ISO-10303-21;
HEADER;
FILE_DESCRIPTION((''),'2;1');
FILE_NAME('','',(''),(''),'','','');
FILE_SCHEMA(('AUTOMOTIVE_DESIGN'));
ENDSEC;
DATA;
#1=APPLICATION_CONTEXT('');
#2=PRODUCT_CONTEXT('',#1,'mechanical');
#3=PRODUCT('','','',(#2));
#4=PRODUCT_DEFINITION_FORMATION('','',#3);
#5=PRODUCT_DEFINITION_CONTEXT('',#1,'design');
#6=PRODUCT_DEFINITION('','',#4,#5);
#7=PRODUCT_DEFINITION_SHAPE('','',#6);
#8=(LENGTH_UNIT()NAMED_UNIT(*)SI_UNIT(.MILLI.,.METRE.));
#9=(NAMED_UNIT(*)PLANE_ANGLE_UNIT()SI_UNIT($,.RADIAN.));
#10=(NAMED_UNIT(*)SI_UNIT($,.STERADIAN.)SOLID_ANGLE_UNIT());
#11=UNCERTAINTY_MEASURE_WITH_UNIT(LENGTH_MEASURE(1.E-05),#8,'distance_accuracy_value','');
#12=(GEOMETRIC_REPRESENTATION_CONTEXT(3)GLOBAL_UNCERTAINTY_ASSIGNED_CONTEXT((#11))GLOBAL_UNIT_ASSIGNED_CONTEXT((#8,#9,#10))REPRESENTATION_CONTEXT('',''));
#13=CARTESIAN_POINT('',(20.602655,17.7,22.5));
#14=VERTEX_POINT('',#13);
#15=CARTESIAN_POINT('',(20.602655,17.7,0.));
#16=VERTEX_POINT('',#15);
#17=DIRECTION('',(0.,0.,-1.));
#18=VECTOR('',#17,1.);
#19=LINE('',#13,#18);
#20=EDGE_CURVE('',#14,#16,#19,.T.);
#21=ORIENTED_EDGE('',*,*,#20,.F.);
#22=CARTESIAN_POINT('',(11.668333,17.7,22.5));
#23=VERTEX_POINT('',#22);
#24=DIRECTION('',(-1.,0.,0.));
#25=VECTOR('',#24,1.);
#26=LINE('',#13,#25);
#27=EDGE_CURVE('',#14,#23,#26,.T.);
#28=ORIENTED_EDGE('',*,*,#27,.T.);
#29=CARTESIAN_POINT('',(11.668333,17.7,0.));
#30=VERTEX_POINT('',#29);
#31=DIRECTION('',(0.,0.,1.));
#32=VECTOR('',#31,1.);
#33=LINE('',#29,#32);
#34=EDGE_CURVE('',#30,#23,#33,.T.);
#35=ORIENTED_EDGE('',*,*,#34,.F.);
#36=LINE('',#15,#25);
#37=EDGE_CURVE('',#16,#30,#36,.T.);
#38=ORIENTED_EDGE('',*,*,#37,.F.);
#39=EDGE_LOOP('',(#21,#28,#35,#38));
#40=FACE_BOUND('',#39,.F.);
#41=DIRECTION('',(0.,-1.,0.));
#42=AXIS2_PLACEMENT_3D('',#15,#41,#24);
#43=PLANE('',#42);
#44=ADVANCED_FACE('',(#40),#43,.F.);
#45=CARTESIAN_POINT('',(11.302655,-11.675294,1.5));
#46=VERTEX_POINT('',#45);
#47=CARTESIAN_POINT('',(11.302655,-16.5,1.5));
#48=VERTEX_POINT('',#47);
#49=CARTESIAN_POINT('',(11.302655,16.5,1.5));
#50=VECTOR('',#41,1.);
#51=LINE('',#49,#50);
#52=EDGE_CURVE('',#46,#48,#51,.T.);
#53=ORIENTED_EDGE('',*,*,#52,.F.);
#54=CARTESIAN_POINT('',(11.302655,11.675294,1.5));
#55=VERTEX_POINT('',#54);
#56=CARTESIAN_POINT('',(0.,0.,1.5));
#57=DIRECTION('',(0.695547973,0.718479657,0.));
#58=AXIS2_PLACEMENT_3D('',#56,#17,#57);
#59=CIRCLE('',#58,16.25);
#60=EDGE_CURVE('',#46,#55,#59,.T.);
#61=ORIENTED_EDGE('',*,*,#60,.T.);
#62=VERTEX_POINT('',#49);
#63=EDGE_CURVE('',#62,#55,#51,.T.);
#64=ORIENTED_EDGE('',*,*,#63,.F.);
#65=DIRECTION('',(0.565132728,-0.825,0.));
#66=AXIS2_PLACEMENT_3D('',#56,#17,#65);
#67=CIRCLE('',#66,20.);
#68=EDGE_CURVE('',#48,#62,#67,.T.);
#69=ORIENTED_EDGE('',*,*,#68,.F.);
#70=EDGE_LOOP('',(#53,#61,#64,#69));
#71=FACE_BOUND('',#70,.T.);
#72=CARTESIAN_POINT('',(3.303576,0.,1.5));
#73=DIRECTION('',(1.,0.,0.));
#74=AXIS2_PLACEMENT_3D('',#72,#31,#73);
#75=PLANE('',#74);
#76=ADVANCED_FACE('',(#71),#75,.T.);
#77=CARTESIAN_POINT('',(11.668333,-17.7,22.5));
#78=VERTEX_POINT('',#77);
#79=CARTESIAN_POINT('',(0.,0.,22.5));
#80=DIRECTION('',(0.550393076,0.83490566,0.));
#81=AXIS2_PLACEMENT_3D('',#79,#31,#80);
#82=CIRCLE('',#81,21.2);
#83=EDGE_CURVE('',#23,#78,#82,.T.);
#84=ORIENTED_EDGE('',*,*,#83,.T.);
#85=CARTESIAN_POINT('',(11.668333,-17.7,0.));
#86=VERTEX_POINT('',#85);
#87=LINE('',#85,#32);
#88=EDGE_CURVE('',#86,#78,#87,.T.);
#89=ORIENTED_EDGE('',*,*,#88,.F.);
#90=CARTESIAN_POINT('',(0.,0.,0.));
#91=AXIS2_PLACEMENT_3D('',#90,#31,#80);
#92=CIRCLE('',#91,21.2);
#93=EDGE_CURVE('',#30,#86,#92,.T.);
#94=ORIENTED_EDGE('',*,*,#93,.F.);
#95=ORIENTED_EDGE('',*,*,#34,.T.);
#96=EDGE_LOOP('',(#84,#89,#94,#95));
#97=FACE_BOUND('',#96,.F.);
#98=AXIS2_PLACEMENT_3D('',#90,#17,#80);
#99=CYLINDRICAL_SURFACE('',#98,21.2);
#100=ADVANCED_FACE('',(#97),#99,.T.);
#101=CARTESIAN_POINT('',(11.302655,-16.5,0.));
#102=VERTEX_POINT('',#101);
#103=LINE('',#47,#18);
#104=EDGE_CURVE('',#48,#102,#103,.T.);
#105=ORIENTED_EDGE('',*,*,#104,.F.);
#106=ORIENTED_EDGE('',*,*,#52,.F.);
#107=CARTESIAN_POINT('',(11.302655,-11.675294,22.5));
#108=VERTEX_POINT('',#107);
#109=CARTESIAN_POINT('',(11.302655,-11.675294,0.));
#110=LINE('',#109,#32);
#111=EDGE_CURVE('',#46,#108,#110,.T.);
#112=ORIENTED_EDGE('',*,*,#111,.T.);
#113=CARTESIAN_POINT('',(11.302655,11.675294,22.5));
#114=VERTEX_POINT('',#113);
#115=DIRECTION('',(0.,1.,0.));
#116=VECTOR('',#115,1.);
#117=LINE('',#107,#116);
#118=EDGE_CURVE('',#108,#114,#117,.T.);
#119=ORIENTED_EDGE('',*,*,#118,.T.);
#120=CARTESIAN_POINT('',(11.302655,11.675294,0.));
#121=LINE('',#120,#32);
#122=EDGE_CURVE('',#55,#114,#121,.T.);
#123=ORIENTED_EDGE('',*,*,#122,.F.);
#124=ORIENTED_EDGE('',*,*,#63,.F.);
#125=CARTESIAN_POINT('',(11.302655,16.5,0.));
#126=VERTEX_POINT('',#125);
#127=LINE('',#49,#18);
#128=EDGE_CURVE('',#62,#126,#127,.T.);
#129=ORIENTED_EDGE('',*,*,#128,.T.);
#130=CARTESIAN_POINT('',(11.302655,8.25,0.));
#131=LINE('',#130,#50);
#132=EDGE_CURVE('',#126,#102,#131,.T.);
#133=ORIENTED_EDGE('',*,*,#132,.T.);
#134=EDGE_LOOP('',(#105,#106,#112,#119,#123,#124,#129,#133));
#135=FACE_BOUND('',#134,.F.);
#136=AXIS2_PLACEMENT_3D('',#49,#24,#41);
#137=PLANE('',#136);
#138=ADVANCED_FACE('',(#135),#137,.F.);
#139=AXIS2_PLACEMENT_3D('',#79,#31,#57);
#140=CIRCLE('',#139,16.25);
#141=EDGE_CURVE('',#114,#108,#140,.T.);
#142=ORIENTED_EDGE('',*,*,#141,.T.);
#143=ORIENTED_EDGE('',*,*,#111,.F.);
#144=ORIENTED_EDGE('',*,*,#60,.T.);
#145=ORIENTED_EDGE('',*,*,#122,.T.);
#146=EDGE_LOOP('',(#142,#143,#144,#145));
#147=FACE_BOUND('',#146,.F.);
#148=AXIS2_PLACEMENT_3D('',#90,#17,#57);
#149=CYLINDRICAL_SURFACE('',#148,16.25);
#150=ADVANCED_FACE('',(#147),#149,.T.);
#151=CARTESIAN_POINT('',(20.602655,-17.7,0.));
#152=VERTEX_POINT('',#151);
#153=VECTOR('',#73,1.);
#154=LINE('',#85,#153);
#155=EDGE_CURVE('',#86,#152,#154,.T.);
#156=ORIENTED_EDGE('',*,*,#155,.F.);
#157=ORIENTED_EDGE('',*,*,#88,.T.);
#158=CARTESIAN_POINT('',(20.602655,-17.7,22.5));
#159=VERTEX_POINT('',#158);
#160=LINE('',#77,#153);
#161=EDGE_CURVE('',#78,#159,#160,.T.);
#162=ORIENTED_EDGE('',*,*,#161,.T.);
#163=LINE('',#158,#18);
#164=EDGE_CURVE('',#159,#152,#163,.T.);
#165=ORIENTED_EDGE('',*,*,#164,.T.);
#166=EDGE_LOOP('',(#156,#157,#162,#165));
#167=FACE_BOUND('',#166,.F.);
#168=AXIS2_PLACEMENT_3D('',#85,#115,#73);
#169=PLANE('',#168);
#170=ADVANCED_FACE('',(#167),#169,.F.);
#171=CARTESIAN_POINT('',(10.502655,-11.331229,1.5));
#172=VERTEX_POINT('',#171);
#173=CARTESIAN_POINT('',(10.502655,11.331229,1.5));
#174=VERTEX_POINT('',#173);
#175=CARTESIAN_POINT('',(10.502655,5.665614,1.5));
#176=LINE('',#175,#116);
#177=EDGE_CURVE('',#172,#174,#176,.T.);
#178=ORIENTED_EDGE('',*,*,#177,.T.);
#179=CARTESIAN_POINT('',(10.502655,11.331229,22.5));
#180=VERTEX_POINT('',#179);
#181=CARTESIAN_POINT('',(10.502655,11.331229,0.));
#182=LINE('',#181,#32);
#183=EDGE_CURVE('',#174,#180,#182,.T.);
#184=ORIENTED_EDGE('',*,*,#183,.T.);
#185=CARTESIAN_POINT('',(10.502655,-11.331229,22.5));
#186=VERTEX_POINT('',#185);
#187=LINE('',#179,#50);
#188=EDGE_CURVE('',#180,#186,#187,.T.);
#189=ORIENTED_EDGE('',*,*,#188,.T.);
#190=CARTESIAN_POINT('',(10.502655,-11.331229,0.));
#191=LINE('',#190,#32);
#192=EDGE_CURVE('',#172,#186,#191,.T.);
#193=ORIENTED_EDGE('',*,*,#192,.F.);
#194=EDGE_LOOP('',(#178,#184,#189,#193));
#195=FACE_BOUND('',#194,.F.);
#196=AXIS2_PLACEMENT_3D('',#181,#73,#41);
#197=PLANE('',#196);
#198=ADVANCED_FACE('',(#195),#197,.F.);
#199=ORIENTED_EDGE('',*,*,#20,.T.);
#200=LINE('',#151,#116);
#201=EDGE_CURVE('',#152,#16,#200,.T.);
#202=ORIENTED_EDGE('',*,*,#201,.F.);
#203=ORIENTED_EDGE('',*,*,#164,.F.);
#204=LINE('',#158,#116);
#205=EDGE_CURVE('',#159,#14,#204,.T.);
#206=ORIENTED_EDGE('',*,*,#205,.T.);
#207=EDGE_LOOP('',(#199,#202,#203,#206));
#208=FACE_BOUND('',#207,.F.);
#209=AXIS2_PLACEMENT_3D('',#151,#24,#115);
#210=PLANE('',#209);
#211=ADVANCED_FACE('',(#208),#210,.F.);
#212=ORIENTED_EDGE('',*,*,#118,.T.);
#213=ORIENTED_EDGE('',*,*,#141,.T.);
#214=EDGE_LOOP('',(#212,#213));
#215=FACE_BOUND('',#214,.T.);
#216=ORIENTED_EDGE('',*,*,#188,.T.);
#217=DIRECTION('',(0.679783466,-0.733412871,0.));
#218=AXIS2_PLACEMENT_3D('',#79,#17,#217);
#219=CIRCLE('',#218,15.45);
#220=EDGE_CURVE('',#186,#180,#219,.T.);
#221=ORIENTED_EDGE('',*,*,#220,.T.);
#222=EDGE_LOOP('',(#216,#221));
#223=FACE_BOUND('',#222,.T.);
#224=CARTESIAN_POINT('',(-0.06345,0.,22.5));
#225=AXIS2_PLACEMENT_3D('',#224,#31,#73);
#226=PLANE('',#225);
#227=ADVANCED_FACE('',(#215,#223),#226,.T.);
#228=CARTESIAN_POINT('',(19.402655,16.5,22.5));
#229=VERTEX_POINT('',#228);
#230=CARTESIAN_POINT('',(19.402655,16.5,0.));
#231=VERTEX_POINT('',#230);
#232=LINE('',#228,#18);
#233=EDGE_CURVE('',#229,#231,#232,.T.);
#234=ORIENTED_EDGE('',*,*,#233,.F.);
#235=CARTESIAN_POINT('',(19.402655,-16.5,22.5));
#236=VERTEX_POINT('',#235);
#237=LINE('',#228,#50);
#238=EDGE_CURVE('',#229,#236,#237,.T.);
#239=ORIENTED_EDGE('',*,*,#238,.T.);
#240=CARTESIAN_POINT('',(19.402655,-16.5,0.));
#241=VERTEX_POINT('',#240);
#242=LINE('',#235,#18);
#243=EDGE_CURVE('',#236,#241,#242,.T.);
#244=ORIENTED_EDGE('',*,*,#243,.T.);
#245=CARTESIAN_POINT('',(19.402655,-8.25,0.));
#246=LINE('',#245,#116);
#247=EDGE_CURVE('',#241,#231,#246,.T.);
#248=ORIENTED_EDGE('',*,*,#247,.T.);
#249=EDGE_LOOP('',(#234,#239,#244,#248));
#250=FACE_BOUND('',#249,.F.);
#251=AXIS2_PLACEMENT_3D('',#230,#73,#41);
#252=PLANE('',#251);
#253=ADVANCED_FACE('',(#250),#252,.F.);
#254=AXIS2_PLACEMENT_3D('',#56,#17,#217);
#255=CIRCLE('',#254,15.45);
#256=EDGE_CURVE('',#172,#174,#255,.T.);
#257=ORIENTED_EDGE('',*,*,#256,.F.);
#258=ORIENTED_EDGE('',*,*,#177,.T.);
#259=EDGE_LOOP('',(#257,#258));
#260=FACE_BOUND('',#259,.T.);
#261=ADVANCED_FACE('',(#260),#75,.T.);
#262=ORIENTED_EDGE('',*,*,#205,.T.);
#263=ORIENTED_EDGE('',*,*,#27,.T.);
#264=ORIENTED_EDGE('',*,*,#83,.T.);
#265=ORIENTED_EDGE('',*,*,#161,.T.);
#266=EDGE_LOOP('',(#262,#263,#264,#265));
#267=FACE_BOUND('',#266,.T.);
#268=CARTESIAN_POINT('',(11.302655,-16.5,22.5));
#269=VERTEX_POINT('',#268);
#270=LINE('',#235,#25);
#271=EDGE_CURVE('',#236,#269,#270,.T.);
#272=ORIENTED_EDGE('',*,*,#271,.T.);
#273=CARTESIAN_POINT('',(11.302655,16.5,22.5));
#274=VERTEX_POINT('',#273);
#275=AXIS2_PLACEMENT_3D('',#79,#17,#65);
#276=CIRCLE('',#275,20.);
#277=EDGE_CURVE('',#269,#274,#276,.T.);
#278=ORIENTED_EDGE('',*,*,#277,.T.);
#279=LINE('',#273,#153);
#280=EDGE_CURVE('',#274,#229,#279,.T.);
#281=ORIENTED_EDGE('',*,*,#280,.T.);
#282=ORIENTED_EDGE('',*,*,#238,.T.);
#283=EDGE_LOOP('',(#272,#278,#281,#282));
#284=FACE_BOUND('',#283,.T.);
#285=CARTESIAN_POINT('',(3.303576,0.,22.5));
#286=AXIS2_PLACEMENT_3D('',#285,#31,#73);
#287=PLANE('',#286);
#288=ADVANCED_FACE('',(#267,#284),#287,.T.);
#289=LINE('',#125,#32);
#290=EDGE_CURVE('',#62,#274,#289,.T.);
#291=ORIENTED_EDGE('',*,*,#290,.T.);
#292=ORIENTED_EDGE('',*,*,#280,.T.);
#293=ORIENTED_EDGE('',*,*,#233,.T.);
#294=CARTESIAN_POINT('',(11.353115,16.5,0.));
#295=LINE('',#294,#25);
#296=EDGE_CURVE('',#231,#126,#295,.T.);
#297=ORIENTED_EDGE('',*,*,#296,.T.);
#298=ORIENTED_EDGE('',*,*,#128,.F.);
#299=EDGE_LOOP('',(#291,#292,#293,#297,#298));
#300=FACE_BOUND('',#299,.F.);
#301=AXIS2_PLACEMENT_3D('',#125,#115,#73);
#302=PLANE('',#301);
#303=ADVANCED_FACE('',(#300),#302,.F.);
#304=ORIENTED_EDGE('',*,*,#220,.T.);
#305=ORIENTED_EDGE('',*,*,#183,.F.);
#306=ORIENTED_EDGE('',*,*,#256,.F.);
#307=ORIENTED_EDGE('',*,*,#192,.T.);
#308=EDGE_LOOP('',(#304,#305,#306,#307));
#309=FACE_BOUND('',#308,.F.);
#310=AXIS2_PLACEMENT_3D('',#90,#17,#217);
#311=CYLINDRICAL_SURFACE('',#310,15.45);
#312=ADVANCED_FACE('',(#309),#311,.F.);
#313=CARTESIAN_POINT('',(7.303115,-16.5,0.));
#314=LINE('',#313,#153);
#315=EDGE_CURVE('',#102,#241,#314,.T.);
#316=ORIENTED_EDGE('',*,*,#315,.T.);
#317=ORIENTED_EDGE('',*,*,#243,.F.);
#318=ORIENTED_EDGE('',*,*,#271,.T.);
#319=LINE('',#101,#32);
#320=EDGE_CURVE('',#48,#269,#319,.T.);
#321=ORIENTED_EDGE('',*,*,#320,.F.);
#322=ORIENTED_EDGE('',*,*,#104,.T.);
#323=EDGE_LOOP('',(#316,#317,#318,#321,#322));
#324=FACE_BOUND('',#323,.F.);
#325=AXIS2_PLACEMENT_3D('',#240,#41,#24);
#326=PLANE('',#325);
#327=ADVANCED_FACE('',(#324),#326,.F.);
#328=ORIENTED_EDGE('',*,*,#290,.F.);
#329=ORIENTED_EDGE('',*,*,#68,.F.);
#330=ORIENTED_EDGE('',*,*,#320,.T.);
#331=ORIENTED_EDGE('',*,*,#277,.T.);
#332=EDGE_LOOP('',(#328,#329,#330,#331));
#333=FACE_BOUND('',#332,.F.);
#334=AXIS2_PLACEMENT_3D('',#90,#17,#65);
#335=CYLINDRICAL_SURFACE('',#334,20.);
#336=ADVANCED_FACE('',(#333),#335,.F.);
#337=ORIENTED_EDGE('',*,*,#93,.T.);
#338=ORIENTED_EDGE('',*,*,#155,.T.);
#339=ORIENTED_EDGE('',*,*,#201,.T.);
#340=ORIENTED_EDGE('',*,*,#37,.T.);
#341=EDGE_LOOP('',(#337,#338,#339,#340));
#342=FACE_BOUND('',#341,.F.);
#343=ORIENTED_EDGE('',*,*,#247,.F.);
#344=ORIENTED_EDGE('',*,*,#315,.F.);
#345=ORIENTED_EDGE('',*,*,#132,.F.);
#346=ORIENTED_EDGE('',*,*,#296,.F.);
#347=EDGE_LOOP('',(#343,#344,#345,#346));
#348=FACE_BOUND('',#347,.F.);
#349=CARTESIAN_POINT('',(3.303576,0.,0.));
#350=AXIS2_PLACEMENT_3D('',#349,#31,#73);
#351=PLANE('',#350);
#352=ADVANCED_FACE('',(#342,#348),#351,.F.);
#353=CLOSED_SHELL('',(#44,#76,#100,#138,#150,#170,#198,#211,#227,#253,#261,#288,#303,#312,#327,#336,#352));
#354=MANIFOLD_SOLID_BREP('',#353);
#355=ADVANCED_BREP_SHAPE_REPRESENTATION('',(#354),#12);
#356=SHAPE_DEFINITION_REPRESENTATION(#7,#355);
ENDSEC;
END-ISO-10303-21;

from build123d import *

# Parameters (mm, degrees)
F1_DEPTH = 1.5
F2_DEPTH = 22.5
F4_DEPTH = 25


# Not quite as in the source:
# - a feature names something its author has since deleted; it is built from what else it names


with BuildPart() as f1:
    # F0 (on Top) → F1 (new body)
    with BuildSketch(Plane.XY):
        with BuildLine():
            Line((20.6026545555, 17.7), (11.6683332143, 17.7))
            ThreePointArc((11.6683332143, 17.7), (-21.2, 0), (11.6683332143, -17.7))
            Line((11.6683332143, -17.7), (20.6026545555, -17.7))
            Line((20.6026545555, -17.7), (20.6026545555, 17.7))
        make_face()
        with BuildLine():
            ThreePointArc((11.3026545555, -16.5), (-20, 0), (11.3026545555, 16.5))
            Line((11.3026545555, 16.5), (19.4026545555, 16.5))
            Line((19.4026545555, 16.5), (19.4026545555, -16.5))
            Line((19.4026545555, -16.5), (11.3026545555, -16.5))
        make_face(mode=Mode.SUBTRACT)
        with BuildLine():
            Line((19.4026545555, 16.5), (11.3026545555, 16.5))
            ThreePointArc((11.3026545555, 16.5), (-20, 0), (11.3026545555, -16.5))
            Line((11.3026545555, -16.5), (19.4026545555, -16.5))
            Line((19.4026545555, -16.5), (19.4026545555, 16.5))
        make_face()
        with BuildLine():
            ThreePointArc((11.3026545555, -11.6752944288), (-16.25, 0), (11.3026545555, 11.6752944288))
            Line((11.3026545555, 11.6752944288), (11.3026545555, -11.6752944288))
        make_face(mode=Mode.SUBTRACT)
        with BuildLine():
            Line((11.3026545555, -11.6752944288), (11.3026545555, 11.6752944288))
            ThreePointArc((11.3026545555, 11.6752944288), (-16.25, 0), (11.3026545555, -11.6752944288))
        make_face()
        with BuildLine():
            ThreePointArc((10.5026545555, -11.3312288517), (-15.45, 0), (10.5026545555, 11.3312288517))
            Line((10.5026545555, 11.3312288517), (10.5026545555, -11.3312288517))
        make_face(mode=Mode.SUBTRACT)
        with BuildLine():
            Line((10.5026545555, -11.3312288517), (10.5026545555, 11.3312288517))
            ThreePointArc((10.5026545555, 11.3312288517), (-15.45, 0), (10.5026545555, -11.3312288517))
        make_face()
    extrude(amount=F1_DEPTH)

    # F0 (on Top) → F2 (join)
    with BuildSketch(Plane.XY):
        with BuildLine():
            Line((20.6026545555, 17.7), (11.6683332143, 17.7))
            ThreePointArc((11.6683332143, 17.7), (-21.2, 0), (11.6683332143, -17.7))
            Line((11.6683332143, -17.7), (20.6026545555, -17.7))
            Line((20.6026545555, -17.7), (20.6026545555, 17.7))
        make_face()
        with BuildLine():
            ThreePointArc((11.3026545555, -16.5), (-20, 0), (11.3026545555, 16.5))
            Line((11.3026545555, 16.5), (19.4026545555, 16.5))
            Line((19.4026545555, 16.5), (19.4026545555, -16.5))
            Line((19.4026545555, -16.5), (11.3026545555, -16.5))
        make_face(mode=Mode.SUBTRACT)
        with BuildLine():
            Line((11.3026545555, -11.6752944288), (11.3026545555, 11.6752944288))
            ThreePointArc((11.3026545555, 11.6752944288), (-16.25, 0), (11.3026545555, -11.6752944288))
        make_face()
        with BuildLine():
            ThreePointArc((10.5026545555, -11.3312288517), (-15.45, 0), (10.5026545555, 11.3312288517))
            Line((10.5026545555, 11.3312288517), (10.5026545555, -11.3312288517))
        make_face(mode=Mode.SUBTRACT)
    extrude(amount=F2_DEPTH)

    # F3 (on face) → F4 (cut)
    with BuildSketch(Plane.XY.offset(1.5)):
        Polygon((19.4026545555, 16.5), (11.3026545555, 16.5), (11.3026545555, 11.6752944288), (11.3026545555, -11.6752944288), (11.3026545555, -16.5), (19.4026545555, -16.5), align=None)
    extrude(amount=-F4_DEPTH, mode=Mode.SUBTRACT)


solid = f1.part
